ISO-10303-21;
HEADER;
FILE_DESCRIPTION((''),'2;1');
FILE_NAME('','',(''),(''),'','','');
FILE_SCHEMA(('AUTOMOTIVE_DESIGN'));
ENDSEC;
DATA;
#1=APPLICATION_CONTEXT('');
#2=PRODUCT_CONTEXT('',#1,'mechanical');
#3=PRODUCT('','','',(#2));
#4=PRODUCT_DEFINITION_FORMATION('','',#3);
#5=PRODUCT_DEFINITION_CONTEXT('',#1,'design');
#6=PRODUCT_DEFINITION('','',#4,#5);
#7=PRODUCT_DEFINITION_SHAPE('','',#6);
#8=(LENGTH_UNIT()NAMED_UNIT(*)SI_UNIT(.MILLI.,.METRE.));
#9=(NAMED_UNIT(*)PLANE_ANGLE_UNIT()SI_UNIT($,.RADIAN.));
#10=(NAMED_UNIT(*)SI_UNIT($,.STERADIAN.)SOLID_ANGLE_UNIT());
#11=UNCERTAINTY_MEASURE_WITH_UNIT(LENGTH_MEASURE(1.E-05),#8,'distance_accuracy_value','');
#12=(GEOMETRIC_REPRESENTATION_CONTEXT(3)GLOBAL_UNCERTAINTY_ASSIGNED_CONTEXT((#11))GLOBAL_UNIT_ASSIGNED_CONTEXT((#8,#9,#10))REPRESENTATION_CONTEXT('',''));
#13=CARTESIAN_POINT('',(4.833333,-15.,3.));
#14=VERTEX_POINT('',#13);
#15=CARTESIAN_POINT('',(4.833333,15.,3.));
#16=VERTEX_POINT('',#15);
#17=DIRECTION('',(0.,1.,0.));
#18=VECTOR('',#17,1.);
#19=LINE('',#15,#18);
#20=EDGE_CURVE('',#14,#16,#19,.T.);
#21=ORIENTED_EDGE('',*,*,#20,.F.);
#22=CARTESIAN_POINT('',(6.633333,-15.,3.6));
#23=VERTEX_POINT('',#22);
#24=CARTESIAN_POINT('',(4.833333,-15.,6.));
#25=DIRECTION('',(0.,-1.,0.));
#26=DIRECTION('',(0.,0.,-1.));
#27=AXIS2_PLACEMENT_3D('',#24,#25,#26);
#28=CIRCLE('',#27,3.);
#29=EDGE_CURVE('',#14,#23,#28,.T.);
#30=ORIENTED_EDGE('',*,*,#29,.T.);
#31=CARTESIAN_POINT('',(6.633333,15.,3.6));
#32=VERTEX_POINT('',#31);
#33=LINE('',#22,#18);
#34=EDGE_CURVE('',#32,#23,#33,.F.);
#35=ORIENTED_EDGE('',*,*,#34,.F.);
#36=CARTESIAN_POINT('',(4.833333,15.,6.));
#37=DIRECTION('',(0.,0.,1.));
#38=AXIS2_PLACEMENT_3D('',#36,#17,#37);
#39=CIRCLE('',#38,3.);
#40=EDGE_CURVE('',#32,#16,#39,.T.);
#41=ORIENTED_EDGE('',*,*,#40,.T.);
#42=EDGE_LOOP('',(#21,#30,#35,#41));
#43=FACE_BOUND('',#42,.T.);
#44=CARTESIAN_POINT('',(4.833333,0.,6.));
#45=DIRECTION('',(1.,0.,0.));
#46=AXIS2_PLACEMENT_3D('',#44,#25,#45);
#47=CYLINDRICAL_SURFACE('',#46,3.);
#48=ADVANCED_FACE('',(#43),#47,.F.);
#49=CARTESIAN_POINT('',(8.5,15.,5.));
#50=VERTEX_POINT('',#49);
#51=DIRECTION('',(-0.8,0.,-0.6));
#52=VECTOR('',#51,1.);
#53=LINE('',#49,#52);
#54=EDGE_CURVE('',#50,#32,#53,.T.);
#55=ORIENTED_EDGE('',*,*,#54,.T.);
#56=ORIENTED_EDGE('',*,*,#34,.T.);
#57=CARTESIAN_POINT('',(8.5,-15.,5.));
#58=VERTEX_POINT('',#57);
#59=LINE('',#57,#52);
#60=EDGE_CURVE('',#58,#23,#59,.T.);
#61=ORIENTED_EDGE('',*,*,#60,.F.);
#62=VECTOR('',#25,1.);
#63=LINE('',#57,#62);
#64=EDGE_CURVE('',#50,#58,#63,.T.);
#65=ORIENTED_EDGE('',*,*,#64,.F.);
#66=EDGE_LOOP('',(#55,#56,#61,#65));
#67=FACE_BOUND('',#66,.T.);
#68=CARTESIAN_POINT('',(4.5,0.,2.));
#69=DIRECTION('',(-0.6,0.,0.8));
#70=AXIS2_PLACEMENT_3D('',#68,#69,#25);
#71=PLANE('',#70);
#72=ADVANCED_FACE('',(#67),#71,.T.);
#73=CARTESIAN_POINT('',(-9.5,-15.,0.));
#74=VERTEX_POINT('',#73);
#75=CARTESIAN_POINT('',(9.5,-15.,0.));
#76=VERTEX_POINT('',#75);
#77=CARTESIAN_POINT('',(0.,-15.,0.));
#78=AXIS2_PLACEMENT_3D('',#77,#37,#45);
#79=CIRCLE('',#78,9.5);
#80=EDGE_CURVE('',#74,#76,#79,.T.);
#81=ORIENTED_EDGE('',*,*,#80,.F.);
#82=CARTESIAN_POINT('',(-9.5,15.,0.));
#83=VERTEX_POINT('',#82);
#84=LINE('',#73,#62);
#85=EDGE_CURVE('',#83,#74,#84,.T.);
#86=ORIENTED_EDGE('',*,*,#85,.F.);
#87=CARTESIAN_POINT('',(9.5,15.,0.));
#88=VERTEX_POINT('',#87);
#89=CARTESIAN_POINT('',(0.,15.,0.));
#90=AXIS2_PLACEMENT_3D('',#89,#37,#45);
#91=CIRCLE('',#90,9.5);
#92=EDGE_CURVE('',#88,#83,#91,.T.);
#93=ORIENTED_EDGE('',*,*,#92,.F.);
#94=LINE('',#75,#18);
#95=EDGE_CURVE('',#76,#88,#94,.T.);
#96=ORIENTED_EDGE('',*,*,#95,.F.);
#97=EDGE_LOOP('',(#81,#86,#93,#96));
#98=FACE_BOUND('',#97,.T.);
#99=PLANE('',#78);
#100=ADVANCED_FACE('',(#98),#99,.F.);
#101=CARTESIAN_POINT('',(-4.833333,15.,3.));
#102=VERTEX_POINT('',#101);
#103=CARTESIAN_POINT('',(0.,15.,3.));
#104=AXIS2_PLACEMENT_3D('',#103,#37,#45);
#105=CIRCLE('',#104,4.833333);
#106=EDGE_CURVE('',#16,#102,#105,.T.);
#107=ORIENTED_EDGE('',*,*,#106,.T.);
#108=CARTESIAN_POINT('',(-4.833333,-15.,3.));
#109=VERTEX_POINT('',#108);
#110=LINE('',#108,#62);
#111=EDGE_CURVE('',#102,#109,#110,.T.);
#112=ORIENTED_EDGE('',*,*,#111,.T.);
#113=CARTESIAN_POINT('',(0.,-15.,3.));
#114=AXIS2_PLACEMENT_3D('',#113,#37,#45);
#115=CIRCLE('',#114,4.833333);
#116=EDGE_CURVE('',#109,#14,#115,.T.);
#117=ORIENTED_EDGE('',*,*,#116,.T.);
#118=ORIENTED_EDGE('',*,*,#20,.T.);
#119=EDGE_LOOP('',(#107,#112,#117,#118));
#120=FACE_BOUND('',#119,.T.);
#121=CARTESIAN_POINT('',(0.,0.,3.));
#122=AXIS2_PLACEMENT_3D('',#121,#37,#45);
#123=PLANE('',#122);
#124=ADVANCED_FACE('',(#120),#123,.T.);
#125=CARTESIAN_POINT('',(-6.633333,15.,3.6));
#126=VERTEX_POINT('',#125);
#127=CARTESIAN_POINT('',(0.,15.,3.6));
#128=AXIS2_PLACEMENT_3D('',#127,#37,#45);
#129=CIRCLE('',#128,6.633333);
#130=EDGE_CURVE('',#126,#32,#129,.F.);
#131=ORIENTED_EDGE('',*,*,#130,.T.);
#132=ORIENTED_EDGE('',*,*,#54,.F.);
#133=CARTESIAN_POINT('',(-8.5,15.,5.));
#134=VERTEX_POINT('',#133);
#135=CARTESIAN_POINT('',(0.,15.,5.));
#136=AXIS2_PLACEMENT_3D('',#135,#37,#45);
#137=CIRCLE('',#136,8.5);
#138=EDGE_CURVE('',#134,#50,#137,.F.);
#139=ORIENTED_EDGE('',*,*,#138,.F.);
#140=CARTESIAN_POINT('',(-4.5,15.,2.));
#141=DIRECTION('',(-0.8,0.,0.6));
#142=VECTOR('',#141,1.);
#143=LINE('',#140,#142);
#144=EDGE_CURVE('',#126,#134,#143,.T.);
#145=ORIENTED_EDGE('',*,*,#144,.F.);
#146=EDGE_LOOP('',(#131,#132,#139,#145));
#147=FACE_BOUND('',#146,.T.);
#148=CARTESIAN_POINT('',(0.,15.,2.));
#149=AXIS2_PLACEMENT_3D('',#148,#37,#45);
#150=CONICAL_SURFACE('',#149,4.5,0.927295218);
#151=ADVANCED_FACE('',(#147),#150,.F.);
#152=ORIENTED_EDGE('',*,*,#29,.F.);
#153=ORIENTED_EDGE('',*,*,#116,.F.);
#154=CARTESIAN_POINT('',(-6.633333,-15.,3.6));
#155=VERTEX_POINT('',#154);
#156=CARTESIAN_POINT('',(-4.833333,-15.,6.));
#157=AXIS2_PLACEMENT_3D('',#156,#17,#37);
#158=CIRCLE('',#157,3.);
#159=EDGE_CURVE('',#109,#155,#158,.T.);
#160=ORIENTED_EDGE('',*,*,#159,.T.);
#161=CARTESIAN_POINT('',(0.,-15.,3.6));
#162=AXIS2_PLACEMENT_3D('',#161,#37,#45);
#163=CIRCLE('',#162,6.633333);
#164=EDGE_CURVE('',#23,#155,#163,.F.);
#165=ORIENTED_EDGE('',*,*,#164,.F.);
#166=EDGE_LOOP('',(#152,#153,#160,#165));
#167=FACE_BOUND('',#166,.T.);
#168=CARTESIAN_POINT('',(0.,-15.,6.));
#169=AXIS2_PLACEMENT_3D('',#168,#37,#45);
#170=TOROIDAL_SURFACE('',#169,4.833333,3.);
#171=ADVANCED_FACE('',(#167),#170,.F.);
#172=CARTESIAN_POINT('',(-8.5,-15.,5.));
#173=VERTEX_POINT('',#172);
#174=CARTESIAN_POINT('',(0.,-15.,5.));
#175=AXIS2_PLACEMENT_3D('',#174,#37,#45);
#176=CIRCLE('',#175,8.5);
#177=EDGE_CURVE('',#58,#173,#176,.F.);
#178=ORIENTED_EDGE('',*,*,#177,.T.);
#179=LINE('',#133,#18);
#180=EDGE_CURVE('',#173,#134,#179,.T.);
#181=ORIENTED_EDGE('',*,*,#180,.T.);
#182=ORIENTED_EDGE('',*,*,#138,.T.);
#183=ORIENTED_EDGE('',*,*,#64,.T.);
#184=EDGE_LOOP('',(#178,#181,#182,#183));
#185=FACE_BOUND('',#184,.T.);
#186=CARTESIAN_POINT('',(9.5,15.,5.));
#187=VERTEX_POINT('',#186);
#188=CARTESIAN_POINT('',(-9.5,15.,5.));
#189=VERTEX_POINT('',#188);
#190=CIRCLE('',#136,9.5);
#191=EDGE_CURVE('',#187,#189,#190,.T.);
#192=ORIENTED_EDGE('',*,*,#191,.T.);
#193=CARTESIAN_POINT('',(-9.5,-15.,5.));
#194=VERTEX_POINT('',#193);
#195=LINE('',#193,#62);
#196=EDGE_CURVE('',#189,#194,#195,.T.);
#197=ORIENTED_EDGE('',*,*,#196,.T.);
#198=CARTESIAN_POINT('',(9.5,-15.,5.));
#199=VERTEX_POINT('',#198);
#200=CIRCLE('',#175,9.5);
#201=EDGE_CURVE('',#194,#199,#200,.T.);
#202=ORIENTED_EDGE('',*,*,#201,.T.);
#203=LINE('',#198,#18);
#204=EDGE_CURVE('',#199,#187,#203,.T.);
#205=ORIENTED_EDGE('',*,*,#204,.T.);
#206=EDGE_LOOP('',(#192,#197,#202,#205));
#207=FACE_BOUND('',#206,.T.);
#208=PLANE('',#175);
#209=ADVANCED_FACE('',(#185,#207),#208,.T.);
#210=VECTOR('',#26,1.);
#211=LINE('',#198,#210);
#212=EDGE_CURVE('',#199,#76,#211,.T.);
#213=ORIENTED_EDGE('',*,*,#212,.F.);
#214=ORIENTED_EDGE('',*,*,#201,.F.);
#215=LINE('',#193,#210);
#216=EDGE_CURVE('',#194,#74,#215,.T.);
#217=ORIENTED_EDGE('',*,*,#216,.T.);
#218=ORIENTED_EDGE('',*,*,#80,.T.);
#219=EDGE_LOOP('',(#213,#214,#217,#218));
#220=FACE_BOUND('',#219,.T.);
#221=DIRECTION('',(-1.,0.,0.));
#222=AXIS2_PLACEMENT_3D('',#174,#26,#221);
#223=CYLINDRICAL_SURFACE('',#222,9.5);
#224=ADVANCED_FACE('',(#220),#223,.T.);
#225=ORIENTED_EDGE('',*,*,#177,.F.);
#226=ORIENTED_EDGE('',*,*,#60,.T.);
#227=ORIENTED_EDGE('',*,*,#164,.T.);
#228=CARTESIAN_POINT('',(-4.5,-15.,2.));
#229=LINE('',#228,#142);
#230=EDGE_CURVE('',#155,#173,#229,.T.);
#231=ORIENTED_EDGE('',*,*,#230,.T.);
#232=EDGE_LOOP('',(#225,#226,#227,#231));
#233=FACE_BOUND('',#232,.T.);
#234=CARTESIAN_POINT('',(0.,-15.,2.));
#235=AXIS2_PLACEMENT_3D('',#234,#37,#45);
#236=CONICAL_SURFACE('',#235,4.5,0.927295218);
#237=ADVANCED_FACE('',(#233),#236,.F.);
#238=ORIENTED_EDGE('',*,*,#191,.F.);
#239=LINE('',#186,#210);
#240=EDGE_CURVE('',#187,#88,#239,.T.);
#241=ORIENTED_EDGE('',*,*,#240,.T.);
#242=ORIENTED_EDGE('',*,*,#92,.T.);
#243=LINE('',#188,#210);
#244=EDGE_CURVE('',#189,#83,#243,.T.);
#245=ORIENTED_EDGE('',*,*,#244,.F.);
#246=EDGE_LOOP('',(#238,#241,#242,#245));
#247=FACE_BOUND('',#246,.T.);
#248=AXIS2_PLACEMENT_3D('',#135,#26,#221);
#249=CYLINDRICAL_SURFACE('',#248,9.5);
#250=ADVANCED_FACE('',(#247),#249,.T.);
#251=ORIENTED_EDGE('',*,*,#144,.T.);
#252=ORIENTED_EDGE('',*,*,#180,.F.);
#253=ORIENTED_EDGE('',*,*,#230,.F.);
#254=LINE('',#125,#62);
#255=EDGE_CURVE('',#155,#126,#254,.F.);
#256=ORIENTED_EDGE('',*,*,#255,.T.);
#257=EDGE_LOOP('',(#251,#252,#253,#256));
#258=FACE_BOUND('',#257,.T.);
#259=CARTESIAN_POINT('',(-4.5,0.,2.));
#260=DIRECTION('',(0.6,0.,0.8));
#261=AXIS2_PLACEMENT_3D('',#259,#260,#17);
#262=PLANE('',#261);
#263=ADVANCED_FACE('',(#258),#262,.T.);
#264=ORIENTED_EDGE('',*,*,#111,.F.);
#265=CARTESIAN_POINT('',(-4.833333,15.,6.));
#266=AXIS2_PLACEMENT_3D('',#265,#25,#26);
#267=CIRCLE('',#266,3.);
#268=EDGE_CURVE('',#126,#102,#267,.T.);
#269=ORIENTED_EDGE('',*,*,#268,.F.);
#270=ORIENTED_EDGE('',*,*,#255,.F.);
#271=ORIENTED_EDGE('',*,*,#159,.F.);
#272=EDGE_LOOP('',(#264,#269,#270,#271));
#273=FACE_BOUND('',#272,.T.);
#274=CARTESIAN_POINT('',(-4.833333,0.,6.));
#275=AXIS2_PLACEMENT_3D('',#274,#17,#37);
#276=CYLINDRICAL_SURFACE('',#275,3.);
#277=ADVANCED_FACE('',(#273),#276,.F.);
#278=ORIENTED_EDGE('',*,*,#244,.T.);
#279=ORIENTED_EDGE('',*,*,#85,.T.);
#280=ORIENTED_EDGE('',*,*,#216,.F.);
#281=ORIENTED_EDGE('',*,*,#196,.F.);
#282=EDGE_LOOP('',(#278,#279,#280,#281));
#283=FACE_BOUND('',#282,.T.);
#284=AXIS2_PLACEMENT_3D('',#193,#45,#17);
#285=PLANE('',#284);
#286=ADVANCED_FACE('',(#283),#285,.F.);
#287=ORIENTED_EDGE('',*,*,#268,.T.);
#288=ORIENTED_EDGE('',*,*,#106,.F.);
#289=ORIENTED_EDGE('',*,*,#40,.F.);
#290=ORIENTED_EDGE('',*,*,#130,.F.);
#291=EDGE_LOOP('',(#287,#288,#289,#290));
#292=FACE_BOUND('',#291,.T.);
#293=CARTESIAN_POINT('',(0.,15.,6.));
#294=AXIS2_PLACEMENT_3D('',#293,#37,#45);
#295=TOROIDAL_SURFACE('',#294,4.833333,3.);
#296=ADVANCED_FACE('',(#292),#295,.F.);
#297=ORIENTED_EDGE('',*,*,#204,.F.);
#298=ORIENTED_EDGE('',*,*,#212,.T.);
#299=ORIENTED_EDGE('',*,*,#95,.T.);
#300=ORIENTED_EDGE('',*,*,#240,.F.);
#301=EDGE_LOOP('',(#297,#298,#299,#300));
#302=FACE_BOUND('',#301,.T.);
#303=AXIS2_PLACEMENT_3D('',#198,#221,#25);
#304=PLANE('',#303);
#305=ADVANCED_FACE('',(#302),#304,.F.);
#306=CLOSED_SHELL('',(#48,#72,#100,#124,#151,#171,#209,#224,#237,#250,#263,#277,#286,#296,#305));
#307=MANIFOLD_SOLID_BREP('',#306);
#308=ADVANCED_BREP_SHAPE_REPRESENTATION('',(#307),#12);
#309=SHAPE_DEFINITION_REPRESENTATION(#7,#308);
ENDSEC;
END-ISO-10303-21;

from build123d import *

# Parameters (mm, degrees)
Y_KSEKLIK_EKSTR_ZYON1_DEPTH = 5
KES_EKSTR_ZYON1_DEPTH       = 2
PAH1_SIZE                   = 4
PAH1_SIZE_2                 = 3
RADYUS1_R                   = 3


with BuildPart() as part:
    # Çizim1 → Yükseklik-Ekstrüzyon1 (new body)
    with BuildSketch(Plane.XY):
        with BuildLine():
            Line((-9.5, -15), (-9.5, 15))
            ThreePointArc((-9.5, 15), (0, 24.5), (9.5, 15))
            Line((9.5, 15), (9.5, -15))
            ThreePointArc((9.5, -15), (0, -24.5), (-9.5, -15))
        make_face()
    extrude(amount=Y_KSEKLIK_EKSTR_ZYON1_DEPTH)

    # Çizim2 → Kes-Ekstrüzyon1 (cut)
    with BuildSketch(Plane.XY.offset(5)):
        with BuildLine():
            Line((-4.5, 15), (-4.5, -15))
            ThreePointArc((-4.5, -15), (0, -19.5), (4.5, -15))
            Line((4.5, -15), (4.5, 15))
            ThreePointArc((4.5, 15), (0, 19.5), (-4.5, 15))
        make_face()
    extrude(amount=-KES_EKSTR_ZYON1_DEPTH, mode=Mode.SUBTRACT)

    # Pah1
    # the kernel refuses this chamfer: 4, 3 mm, written as the material it takes off along each edge
    with BuildSketch(Plane(origin=(0, -15, 5), x_dir=(-1, 0, 0), z_dir=(0, 1, 0))) as pah1_piece_1_section:
        Polygon((4.5 + PAH1_SIZE, 0), (4.5, -PAH1_SIZE_2), (4.5, 0), align=None)
    pah1_piece_1 = revolve(axis=Axis((0, -15, 5), (0, 0, 1)), revolution_arc=180, mode=Mode.PRIVATE)
    pah1_piece_1 = split(pah1_piece_1, bisect_by=Plane(origin=(0, -22.201904041, 3), z_dir=(0, 0, 1)), keep=Keep.TOP, mode=Mode.PRIVATE)
    add(pah1_piece_1, mode=Mode.SUBTRACT)
    with BuildSketch(Plane(origin=(4.5, -15, 5), x_dir=(0.9997296931968459, 0, 0.023249527748763873), z_dir=(0, 1, 0))) as pah1_piece_2_section:
        Polygon((PAH1_SIZE * 0.999729693197, PAH1_SIZE * 0.0232495277488), (-PAH1_SIZE_2 * 0.0232495277488, PAH1_SIZE_2 * 0.999729693197), (0, 0), align=None)
    pah1_piece_2 = extrude(amount=30, mode=Mode.PRIVATE)
    pah1_piece_2 = split(pah1_piece_2, bisect_by=Plane(origin=(5.968375105, 0, 3), z_dir=(0, 0, 1)), keep=Keep.TOP, mode=Mode.PRIVATE)
    add(pah1_piece_2, mode=Mode.SUBTRACT)
    with BuildSketch(Plane(origin=(-4.5, 15, 5), x_dir=(-0.9997296931968459, 0, 0.023249527748763883), z_dir=(0, -1, 0))) as pah1_piece_3_section:
        Polygon((PAH1_SIZE * 0.999729693197, PAH1_SIZE * 0.0232495277488), (-PAH1_SIZE_2 * 0.0232495277488, PAH1_SIZE_2 * 0.999729693197), (0, 0), align=None)
    pah1_piece_3 = extrude(amount=30, mode=Mode.PRIVATE)
    pah1_piece_3 = split(pah1_piece_3, bisect_by=Plane(origin=(-5.968375105, 0, 3), z_dir=(0, 0, 1)), keep=Keep.TOP, mode=Mode.PRIVATE)
    add(pah1_piece_3, mode=Mode.SUBTRACT)
    with BuildSketch(Plane(origin=(0, 15, 5), x_dir=(1, 0, 0), z_dir=(0, -1, 0))) as pah1_piece_4_section:
        Polygon((4.5 + PAH1_SIZE, 0), (4.5, -PAH1_SIZE_2), (4.5, 0), align=None)
    pah1_piece_4 = revolve(axis=Axis((0, 15, 5), (0, 0, 1)), revolution_arc=180, mode=Mode.PRIVATE)
    pah1_piece_4 = split(pah1_piece_4, bisect_by=Plane(origin=(0, 22.201904042, 3), z_dir=(0, 0, 1)), keep=Keep.TOP, mode=Mode.PRIVATE)
    add(pah1_piece_4, mode=Mode.SUBTRACT)

    # Radyus1
    radyus1_edges = [part.edges().sort_by_distance(p)[0] for p in [
        (0, -20.833333333, 3),
        (5.833333333, 0, 3),
        (-5.833333333, 0, 3),
        (0, 20.833333333, 3),
    ]]
    fillet(radyus1_edges, radius=RADYUS1_R)


solid = part.part
